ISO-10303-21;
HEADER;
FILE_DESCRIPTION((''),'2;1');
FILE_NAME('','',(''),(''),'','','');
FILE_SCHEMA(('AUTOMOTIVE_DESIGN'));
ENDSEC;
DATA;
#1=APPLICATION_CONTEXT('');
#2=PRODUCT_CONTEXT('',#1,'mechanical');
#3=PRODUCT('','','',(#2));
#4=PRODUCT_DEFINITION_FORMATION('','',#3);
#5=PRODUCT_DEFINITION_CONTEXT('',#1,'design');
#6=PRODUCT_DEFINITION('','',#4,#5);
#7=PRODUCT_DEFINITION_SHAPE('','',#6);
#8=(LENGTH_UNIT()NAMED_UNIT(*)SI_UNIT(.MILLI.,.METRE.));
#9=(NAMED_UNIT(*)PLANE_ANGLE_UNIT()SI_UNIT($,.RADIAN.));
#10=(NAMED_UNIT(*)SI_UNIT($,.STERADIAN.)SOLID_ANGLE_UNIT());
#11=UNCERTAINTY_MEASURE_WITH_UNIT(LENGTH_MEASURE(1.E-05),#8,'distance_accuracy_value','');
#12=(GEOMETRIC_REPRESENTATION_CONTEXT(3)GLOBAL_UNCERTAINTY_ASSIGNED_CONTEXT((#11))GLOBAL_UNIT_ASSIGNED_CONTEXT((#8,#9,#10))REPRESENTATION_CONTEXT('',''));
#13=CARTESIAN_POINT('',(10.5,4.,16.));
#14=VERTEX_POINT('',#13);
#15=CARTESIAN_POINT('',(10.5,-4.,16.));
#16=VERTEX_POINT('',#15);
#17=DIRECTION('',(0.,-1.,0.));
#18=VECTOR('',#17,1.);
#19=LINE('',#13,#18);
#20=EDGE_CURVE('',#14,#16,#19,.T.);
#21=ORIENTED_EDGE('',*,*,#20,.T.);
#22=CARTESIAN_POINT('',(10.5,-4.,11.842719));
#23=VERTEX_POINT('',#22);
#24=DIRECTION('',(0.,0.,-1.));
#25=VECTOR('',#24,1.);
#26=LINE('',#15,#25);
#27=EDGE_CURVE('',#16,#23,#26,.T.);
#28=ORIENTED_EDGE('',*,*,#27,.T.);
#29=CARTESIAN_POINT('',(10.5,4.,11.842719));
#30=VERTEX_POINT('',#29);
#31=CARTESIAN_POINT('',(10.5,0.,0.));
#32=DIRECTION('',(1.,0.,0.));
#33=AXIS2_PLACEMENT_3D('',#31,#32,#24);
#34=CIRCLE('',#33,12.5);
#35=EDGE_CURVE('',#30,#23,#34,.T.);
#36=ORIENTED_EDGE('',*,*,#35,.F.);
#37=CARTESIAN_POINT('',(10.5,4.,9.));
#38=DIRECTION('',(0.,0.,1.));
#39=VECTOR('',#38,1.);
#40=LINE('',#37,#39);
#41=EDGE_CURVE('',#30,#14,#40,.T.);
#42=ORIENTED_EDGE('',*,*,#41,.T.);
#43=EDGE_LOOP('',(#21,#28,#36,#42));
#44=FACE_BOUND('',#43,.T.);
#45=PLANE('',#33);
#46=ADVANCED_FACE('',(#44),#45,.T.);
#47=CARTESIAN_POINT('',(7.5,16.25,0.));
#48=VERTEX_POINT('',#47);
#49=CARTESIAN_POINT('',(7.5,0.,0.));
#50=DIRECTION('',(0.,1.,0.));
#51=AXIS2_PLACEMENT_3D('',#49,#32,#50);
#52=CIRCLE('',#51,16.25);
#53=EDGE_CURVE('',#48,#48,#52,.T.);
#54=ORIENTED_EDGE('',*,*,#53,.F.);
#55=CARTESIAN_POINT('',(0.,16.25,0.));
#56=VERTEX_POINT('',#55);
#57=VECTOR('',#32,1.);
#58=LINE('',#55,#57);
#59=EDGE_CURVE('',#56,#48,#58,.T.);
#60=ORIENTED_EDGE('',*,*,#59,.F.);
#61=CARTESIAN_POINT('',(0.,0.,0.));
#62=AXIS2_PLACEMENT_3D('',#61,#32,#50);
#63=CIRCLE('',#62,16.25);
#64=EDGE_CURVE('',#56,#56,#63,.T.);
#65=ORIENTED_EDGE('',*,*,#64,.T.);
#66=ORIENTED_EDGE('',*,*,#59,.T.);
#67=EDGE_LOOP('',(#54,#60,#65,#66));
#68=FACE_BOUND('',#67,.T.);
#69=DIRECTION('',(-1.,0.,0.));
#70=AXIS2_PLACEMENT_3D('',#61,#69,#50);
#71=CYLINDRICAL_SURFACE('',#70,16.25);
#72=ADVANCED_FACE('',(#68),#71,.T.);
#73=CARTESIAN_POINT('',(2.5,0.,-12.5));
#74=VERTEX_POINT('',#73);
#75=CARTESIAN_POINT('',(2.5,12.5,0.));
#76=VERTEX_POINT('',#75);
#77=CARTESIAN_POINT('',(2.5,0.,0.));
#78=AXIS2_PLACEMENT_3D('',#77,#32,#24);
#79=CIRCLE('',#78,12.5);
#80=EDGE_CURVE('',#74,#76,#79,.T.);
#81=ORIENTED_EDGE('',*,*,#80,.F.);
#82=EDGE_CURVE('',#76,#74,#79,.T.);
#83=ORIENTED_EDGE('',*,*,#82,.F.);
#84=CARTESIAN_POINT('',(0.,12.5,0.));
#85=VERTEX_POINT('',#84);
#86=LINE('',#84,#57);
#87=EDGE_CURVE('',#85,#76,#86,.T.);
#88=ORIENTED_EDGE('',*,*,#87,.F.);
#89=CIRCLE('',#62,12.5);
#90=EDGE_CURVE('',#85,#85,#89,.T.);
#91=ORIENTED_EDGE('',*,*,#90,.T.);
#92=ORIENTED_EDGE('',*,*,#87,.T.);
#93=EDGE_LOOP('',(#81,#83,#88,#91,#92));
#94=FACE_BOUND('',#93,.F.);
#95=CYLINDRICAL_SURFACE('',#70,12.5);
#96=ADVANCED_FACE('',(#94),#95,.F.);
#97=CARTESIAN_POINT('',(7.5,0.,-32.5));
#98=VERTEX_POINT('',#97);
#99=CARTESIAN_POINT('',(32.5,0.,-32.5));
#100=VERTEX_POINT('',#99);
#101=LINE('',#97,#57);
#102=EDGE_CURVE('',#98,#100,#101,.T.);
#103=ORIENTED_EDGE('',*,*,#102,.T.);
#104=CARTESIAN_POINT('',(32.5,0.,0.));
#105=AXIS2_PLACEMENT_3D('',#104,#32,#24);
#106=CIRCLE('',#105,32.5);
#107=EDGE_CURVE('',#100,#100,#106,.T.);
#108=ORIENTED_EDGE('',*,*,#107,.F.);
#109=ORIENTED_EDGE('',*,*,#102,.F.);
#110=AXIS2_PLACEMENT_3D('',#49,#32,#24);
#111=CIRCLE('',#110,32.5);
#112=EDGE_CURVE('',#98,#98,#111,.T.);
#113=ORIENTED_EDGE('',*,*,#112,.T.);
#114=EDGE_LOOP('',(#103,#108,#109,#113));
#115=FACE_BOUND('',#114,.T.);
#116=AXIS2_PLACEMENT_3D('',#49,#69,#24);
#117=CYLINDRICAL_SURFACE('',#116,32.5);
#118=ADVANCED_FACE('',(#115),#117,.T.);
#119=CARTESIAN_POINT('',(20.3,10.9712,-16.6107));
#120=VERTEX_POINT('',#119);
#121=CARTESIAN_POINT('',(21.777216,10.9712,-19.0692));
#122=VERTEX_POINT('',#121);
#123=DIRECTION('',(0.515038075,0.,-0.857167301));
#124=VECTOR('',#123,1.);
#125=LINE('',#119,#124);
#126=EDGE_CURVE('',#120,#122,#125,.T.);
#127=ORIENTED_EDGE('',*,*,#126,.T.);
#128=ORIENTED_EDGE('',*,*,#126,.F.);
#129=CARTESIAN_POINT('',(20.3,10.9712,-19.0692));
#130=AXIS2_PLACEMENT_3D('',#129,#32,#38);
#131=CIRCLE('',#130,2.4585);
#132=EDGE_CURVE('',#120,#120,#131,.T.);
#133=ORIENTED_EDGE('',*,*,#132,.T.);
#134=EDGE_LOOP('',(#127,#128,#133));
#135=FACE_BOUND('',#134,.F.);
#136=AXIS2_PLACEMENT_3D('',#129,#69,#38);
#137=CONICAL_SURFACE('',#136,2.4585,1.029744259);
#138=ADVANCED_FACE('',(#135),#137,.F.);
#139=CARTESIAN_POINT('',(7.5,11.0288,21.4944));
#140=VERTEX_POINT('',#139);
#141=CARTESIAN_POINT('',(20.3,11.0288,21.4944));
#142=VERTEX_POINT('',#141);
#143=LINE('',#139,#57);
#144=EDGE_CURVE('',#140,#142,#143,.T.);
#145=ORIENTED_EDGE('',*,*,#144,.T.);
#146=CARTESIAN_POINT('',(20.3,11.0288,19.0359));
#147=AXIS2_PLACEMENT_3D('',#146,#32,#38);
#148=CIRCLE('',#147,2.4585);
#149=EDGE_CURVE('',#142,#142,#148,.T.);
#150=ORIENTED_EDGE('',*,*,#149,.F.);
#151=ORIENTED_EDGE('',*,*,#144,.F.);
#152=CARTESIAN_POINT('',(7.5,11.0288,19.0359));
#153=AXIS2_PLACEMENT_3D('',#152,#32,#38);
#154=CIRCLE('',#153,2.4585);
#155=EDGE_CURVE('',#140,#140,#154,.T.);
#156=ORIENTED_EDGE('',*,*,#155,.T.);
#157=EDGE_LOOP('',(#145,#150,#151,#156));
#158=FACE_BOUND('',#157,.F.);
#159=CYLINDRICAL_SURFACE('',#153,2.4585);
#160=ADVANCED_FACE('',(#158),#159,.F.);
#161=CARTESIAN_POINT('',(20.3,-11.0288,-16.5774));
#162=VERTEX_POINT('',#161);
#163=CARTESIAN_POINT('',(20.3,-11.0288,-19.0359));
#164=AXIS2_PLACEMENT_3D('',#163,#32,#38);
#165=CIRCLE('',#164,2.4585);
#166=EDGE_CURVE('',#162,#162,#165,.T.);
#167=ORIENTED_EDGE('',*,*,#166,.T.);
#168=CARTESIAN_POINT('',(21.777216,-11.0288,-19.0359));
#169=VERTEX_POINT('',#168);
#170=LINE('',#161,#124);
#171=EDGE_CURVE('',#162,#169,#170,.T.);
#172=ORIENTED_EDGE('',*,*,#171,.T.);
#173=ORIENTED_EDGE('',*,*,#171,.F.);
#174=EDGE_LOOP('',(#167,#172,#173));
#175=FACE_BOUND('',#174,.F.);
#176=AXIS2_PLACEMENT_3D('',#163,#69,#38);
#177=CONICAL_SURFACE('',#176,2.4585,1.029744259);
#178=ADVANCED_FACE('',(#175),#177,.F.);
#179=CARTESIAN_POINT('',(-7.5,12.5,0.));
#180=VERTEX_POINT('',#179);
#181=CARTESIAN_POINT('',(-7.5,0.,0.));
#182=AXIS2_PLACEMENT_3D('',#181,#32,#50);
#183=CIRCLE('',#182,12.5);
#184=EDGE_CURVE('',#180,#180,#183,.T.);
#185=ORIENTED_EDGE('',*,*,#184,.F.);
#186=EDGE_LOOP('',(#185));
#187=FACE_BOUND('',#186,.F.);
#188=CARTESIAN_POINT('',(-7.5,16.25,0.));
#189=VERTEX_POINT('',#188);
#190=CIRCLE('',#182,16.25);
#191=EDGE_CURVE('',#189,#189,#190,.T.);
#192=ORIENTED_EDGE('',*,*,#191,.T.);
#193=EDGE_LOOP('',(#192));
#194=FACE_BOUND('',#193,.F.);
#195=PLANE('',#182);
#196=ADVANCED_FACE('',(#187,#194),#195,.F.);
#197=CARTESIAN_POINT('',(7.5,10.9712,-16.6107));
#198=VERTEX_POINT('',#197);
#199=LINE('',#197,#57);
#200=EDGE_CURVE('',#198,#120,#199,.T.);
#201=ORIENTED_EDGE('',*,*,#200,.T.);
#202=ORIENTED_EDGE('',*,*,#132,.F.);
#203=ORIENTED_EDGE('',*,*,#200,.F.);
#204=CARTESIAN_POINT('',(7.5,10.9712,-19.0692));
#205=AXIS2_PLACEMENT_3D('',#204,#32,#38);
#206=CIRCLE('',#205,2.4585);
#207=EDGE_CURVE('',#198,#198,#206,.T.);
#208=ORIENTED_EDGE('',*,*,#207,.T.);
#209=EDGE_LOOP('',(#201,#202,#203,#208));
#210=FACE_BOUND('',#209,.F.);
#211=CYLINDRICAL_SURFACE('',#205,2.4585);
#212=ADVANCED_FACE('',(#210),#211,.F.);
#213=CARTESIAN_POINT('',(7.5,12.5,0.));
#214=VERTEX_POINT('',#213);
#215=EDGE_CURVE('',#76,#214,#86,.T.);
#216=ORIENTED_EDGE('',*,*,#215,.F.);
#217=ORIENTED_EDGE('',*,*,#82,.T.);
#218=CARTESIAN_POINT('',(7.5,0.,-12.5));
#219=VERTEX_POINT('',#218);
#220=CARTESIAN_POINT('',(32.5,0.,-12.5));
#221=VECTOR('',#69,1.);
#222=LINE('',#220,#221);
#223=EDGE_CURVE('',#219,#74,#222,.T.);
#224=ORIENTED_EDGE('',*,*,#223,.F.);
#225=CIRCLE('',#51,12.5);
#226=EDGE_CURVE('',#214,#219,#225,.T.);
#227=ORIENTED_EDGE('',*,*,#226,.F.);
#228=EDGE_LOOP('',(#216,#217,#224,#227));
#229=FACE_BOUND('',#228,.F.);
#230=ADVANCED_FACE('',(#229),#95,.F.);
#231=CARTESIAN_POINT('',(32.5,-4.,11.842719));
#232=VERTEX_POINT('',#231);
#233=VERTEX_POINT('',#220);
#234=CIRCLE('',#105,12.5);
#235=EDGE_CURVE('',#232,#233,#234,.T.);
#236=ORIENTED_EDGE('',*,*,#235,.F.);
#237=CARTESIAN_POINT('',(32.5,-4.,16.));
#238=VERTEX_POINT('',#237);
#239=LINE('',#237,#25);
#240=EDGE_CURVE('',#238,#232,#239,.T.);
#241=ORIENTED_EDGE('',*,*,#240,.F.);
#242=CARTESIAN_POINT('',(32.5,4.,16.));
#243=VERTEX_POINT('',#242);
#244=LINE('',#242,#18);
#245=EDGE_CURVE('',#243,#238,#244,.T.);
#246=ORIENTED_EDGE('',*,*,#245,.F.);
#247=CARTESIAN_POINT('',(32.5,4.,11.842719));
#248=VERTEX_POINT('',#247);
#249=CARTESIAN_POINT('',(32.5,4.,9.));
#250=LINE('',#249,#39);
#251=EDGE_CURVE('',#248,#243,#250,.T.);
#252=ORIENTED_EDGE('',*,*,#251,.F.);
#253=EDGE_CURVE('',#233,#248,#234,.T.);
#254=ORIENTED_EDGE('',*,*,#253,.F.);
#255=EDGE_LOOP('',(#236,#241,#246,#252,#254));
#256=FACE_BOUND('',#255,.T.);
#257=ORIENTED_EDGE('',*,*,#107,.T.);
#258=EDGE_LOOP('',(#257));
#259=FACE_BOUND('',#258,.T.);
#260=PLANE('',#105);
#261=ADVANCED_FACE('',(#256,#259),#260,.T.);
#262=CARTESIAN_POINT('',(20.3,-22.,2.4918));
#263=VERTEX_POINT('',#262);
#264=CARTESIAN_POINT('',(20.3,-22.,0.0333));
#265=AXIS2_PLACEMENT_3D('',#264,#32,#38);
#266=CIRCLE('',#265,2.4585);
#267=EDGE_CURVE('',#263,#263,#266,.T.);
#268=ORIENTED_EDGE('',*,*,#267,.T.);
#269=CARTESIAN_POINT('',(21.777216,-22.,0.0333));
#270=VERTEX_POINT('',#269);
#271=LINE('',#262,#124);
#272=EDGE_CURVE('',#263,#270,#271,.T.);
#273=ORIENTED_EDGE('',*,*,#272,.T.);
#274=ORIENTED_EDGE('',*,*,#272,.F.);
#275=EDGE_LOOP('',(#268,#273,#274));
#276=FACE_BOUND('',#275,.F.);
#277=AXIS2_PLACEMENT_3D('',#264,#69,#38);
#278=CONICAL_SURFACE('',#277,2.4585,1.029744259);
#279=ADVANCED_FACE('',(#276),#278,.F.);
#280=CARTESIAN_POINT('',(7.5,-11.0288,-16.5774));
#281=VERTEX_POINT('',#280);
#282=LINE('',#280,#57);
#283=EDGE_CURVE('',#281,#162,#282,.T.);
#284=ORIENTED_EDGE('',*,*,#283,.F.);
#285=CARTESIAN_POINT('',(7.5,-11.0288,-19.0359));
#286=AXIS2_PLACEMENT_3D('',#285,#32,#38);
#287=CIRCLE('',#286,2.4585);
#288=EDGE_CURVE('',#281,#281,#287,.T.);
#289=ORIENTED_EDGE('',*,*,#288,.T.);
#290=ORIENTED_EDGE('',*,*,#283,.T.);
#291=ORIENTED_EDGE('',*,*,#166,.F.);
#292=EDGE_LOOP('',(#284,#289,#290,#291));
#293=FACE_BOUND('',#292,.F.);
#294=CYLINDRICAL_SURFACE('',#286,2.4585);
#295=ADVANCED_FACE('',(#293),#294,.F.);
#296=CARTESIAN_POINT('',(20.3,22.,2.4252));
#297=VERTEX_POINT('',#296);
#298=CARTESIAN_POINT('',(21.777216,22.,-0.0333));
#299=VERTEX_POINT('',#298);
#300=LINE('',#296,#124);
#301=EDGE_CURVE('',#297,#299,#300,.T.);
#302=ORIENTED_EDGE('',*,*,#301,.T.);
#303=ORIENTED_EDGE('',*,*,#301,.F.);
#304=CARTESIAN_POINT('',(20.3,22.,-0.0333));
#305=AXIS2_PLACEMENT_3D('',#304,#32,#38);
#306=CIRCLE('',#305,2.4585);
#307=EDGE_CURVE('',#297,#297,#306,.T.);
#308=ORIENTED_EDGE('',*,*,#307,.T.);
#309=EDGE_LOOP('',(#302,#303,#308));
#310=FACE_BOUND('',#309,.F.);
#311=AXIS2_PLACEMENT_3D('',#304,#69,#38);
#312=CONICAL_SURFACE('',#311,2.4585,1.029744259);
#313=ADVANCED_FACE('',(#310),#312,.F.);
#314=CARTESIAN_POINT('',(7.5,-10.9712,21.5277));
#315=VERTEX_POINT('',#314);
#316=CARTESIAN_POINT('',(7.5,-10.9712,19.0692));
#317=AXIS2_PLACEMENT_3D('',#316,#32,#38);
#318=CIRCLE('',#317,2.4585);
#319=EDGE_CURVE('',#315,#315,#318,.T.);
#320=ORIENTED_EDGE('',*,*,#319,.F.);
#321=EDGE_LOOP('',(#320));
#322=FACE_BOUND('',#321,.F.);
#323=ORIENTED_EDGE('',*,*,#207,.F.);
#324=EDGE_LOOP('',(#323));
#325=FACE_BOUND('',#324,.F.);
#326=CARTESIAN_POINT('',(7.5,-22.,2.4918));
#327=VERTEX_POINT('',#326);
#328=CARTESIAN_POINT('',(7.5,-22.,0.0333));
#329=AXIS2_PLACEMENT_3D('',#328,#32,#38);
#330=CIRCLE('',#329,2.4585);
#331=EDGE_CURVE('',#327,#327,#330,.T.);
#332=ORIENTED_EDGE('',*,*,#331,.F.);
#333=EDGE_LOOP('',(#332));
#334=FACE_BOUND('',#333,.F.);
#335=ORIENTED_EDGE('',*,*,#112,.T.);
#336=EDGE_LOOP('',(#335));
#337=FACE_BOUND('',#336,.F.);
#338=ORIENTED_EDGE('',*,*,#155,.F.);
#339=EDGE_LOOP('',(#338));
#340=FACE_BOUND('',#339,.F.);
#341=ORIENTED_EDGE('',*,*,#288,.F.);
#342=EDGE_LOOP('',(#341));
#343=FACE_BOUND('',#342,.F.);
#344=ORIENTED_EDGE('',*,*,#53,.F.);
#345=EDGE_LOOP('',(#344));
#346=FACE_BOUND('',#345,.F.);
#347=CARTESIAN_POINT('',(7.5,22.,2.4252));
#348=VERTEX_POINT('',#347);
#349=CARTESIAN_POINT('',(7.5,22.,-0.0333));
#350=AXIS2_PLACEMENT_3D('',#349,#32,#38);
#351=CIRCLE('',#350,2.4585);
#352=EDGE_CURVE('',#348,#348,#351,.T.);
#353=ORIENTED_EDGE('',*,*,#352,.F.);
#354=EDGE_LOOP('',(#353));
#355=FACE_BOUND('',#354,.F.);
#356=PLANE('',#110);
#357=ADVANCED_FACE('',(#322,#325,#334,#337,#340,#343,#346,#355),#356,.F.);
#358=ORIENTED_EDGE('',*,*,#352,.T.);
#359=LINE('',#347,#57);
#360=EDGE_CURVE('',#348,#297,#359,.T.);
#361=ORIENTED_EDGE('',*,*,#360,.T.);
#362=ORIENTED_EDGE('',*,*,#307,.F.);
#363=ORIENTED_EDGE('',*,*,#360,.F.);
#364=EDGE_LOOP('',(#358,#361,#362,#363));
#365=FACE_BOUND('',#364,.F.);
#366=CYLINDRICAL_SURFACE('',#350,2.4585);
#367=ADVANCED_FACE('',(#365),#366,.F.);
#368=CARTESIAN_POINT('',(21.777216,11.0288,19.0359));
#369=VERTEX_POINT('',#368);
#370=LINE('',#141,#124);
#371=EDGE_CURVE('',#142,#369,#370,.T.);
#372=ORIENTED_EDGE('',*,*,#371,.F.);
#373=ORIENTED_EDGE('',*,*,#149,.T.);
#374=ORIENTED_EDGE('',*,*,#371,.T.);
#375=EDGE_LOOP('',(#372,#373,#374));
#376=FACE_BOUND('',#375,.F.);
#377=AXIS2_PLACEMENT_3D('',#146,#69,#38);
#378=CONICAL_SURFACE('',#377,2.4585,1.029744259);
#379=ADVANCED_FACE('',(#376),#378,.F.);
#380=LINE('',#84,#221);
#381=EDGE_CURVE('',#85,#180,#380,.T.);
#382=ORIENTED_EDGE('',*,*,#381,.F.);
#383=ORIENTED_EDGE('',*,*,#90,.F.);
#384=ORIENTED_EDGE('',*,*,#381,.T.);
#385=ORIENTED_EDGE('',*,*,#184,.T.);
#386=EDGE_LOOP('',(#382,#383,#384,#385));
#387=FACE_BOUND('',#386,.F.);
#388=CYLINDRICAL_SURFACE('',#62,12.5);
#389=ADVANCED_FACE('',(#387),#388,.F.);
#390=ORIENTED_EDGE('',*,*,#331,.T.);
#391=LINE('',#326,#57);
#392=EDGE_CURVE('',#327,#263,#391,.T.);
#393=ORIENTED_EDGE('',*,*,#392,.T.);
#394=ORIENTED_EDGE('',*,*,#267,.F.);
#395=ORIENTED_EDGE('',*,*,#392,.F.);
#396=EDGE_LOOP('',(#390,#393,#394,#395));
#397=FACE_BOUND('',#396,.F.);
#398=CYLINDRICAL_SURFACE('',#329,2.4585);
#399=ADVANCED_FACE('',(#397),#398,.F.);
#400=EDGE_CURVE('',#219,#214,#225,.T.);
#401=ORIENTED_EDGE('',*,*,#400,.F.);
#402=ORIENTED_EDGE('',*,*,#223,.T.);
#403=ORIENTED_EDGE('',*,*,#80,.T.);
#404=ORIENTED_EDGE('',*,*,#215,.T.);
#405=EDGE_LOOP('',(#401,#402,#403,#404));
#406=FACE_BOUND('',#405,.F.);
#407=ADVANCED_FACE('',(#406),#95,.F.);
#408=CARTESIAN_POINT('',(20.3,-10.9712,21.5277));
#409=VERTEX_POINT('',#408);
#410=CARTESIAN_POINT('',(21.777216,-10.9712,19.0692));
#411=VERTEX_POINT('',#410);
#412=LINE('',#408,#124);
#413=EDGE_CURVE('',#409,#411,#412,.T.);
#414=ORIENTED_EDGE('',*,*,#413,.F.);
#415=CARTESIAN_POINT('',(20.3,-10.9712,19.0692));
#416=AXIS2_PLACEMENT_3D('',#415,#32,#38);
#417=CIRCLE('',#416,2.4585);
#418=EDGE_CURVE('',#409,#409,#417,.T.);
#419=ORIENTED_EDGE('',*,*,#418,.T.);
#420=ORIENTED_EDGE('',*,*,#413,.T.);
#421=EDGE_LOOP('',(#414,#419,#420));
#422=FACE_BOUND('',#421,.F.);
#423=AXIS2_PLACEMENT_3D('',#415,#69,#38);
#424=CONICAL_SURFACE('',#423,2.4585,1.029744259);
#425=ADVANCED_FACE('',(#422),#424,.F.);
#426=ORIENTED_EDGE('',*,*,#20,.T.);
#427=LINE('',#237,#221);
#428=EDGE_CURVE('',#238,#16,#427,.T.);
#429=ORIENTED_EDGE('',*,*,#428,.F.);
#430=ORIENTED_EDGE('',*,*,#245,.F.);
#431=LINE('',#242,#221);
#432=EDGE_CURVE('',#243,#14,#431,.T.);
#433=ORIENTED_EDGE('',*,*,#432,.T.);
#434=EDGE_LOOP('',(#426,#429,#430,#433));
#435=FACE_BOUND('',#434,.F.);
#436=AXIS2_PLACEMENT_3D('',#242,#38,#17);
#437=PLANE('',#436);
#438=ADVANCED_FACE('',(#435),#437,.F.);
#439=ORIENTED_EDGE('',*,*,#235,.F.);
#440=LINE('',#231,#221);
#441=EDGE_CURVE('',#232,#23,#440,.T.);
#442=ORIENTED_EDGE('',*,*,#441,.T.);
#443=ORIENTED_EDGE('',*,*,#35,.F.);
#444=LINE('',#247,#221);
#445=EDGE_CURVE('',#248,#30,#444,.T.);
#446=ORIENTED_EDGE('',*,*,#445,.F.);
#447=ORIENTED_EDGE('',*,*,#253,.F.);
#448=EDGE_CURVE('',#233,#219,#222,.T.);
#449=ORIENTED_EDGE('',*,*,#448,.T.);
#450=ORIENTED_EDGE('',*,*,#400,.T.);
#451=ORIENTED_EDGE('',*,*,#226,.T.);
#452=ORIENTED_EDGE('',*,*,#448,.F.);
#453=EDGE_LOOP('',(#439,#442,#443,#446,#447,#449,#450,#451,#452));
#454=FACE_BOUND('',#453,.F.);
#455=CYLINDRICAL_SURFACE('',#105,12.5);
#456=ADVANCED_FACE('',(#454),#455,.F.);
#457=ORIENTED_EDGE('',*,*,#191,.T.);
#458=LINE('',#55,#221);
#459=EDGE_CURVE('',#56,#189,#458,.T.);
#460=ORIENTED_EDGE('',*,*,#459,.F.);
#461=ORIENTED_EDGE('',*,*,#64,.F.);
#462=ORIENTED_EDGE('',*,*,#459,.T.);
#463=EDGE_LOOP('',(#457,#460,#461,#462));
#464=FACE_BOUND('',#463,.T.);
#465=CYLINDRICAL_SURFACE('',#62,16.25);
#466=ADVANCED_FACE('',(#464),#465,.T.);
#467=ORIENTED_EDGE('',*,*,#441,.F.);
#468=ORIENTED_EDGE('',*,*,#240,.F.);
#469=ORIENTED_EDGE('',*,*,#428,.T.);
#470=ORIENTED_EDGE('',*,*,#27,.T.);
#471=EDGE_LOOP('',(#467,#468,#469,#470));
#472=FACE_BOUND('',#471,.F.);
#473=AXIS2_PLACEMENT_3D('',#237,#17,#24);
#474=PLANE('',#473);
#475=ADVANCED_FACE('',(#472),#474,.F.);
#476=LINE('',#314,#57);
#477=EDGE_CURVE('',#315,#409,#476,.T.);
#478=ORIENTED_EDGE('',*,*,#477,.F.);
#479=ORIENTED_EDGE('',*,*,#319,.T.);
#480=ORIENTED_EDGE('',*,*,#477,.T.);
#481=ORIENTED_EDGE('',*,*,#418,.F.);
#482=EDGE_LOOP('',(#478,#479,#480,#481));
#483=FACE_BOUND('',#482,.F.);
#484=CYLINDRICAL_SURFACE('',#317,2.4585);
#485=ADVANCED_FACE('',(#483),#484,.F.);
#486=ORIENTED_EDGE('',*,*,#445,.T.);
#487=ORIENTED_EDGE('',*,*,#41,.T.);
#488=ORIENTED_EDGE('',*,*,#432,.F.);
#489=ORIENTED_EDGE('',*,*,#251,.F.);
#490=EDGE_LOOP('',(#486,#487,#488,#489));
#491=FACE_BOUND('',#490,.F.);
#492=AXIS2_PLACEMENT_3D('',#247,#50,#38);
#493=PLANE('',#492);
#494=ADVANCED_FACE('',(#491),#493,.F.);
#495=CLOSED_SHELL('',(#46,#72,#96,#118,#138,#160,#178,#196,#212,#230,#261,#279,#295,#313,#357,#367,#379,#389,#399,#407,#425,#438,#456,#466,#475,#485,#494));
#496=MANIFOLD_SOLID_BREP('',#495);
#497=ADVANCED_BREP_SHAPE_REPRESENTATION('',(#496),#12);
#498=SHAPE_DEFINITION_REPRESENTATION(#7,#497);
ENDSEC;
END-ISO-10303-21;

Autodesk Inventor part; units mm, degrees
ref_plane "YZ Plane" through (0, 0, 0) normal (1, 0, 0) x (0, 1, 0)
ref_plane "XZ Plane" through (0, 0, 0) normal (0, 1, 0) x (-1, 0, 0)
ref_plane "XY Plane" through (0, 0, 0) normal (0, 0, 1) x (1, 0, 0)
sketch "Skizze1" plane through (0, 0, 0) normal (1, 0, 0) x (0, 1, 0)
  circle A0 centre (0, 0) radius 12.5
  circle A1 centre (0, 0) radius 16.25
  dimension "d0" = 25
  dimension "d1" = 32.5
extrude "Extrusion1" add sketch "Skizze1" along normal mid plane 15
sketch "Skizze2" plane through (7.5, 0, 0) normal (1, 0, 0) x (0, 0, -1)
  circle A0 centre (0, 0) radius 32.5
  dimension "d5" = 65
extrude "Extrusion2" add sketch "Skizze2" along normal blind 25
sketch "Skizze4" plane through (32.5, 0, 0) normal (1, 0, 0) x (0, 0, -1)
  circle A0 centre (0, 0) radius 12.5
  dimension "d8" = 25
extrude "Extrusion3" cut sketch "Skizze4" against normal blind 30
sketch "Skizze5" plane through (7.5, 0, 0) normal (-1, 0, 0) x (0, 0, 1)
  point P0 (0, 0)
  point P1 (0.0333, -22)
  point P2 (19.0692, -10.9712)
  point P3 (19.0359, 11.0288)
  point P4 (-0.0333, 22)
  point P5 (-19.0692, 10.9712)
  point P6 (-19.0359, -11.0288)
  dimension "d18" = 22
  dimension "d21" = 360
hole "Bohrung1" at (7.5, -22, 0.0333) at (7.5, -10.9712, 19.0692) at (7.5, 11.0288, 19.0359) at (7.5, 22, -0.0333) at (7.5, 10.9712, -19.0692) at (7.5, -11.0288, -19.0359) direction (1, 0, 0) diameter 4.917 depth 12.8 tip angle 118 thread size "M6x1" class "6H" standard "ISO Metric profile"
sketch "Skizze6" plane through (32.5, 0, 0) normal (1, 0, 0) x (0, 0, -1)
  line L0 (-16, -4) -> (-9, -4)
  line L1 (-9, -4) -> (-9, 4)
  line L2 (-9, 4) -> (-16, 4)
  line L3 (-16, 4) -> (-16, -4)
  circle A0 centre (0, 0) radius 12.5 projected
  line L4 (-16, -4) -> (-9, 4) construction
  line L5 (-9, -4) -> (-16, 4) construction
  point P0 (-12.5, 0)
  point P1 (-11.8427, -4)
  point P2 (-11.8427, 4)
  dimension "d23" = 7
  dimension "d24" = 8
  dimension "d25" = 9
extrude "Extrusion4" cut sketch "Skizze6" against normal blind 22 contours L3 L2 A0 L0
properties part number "Befestigung bremsscheibe"
